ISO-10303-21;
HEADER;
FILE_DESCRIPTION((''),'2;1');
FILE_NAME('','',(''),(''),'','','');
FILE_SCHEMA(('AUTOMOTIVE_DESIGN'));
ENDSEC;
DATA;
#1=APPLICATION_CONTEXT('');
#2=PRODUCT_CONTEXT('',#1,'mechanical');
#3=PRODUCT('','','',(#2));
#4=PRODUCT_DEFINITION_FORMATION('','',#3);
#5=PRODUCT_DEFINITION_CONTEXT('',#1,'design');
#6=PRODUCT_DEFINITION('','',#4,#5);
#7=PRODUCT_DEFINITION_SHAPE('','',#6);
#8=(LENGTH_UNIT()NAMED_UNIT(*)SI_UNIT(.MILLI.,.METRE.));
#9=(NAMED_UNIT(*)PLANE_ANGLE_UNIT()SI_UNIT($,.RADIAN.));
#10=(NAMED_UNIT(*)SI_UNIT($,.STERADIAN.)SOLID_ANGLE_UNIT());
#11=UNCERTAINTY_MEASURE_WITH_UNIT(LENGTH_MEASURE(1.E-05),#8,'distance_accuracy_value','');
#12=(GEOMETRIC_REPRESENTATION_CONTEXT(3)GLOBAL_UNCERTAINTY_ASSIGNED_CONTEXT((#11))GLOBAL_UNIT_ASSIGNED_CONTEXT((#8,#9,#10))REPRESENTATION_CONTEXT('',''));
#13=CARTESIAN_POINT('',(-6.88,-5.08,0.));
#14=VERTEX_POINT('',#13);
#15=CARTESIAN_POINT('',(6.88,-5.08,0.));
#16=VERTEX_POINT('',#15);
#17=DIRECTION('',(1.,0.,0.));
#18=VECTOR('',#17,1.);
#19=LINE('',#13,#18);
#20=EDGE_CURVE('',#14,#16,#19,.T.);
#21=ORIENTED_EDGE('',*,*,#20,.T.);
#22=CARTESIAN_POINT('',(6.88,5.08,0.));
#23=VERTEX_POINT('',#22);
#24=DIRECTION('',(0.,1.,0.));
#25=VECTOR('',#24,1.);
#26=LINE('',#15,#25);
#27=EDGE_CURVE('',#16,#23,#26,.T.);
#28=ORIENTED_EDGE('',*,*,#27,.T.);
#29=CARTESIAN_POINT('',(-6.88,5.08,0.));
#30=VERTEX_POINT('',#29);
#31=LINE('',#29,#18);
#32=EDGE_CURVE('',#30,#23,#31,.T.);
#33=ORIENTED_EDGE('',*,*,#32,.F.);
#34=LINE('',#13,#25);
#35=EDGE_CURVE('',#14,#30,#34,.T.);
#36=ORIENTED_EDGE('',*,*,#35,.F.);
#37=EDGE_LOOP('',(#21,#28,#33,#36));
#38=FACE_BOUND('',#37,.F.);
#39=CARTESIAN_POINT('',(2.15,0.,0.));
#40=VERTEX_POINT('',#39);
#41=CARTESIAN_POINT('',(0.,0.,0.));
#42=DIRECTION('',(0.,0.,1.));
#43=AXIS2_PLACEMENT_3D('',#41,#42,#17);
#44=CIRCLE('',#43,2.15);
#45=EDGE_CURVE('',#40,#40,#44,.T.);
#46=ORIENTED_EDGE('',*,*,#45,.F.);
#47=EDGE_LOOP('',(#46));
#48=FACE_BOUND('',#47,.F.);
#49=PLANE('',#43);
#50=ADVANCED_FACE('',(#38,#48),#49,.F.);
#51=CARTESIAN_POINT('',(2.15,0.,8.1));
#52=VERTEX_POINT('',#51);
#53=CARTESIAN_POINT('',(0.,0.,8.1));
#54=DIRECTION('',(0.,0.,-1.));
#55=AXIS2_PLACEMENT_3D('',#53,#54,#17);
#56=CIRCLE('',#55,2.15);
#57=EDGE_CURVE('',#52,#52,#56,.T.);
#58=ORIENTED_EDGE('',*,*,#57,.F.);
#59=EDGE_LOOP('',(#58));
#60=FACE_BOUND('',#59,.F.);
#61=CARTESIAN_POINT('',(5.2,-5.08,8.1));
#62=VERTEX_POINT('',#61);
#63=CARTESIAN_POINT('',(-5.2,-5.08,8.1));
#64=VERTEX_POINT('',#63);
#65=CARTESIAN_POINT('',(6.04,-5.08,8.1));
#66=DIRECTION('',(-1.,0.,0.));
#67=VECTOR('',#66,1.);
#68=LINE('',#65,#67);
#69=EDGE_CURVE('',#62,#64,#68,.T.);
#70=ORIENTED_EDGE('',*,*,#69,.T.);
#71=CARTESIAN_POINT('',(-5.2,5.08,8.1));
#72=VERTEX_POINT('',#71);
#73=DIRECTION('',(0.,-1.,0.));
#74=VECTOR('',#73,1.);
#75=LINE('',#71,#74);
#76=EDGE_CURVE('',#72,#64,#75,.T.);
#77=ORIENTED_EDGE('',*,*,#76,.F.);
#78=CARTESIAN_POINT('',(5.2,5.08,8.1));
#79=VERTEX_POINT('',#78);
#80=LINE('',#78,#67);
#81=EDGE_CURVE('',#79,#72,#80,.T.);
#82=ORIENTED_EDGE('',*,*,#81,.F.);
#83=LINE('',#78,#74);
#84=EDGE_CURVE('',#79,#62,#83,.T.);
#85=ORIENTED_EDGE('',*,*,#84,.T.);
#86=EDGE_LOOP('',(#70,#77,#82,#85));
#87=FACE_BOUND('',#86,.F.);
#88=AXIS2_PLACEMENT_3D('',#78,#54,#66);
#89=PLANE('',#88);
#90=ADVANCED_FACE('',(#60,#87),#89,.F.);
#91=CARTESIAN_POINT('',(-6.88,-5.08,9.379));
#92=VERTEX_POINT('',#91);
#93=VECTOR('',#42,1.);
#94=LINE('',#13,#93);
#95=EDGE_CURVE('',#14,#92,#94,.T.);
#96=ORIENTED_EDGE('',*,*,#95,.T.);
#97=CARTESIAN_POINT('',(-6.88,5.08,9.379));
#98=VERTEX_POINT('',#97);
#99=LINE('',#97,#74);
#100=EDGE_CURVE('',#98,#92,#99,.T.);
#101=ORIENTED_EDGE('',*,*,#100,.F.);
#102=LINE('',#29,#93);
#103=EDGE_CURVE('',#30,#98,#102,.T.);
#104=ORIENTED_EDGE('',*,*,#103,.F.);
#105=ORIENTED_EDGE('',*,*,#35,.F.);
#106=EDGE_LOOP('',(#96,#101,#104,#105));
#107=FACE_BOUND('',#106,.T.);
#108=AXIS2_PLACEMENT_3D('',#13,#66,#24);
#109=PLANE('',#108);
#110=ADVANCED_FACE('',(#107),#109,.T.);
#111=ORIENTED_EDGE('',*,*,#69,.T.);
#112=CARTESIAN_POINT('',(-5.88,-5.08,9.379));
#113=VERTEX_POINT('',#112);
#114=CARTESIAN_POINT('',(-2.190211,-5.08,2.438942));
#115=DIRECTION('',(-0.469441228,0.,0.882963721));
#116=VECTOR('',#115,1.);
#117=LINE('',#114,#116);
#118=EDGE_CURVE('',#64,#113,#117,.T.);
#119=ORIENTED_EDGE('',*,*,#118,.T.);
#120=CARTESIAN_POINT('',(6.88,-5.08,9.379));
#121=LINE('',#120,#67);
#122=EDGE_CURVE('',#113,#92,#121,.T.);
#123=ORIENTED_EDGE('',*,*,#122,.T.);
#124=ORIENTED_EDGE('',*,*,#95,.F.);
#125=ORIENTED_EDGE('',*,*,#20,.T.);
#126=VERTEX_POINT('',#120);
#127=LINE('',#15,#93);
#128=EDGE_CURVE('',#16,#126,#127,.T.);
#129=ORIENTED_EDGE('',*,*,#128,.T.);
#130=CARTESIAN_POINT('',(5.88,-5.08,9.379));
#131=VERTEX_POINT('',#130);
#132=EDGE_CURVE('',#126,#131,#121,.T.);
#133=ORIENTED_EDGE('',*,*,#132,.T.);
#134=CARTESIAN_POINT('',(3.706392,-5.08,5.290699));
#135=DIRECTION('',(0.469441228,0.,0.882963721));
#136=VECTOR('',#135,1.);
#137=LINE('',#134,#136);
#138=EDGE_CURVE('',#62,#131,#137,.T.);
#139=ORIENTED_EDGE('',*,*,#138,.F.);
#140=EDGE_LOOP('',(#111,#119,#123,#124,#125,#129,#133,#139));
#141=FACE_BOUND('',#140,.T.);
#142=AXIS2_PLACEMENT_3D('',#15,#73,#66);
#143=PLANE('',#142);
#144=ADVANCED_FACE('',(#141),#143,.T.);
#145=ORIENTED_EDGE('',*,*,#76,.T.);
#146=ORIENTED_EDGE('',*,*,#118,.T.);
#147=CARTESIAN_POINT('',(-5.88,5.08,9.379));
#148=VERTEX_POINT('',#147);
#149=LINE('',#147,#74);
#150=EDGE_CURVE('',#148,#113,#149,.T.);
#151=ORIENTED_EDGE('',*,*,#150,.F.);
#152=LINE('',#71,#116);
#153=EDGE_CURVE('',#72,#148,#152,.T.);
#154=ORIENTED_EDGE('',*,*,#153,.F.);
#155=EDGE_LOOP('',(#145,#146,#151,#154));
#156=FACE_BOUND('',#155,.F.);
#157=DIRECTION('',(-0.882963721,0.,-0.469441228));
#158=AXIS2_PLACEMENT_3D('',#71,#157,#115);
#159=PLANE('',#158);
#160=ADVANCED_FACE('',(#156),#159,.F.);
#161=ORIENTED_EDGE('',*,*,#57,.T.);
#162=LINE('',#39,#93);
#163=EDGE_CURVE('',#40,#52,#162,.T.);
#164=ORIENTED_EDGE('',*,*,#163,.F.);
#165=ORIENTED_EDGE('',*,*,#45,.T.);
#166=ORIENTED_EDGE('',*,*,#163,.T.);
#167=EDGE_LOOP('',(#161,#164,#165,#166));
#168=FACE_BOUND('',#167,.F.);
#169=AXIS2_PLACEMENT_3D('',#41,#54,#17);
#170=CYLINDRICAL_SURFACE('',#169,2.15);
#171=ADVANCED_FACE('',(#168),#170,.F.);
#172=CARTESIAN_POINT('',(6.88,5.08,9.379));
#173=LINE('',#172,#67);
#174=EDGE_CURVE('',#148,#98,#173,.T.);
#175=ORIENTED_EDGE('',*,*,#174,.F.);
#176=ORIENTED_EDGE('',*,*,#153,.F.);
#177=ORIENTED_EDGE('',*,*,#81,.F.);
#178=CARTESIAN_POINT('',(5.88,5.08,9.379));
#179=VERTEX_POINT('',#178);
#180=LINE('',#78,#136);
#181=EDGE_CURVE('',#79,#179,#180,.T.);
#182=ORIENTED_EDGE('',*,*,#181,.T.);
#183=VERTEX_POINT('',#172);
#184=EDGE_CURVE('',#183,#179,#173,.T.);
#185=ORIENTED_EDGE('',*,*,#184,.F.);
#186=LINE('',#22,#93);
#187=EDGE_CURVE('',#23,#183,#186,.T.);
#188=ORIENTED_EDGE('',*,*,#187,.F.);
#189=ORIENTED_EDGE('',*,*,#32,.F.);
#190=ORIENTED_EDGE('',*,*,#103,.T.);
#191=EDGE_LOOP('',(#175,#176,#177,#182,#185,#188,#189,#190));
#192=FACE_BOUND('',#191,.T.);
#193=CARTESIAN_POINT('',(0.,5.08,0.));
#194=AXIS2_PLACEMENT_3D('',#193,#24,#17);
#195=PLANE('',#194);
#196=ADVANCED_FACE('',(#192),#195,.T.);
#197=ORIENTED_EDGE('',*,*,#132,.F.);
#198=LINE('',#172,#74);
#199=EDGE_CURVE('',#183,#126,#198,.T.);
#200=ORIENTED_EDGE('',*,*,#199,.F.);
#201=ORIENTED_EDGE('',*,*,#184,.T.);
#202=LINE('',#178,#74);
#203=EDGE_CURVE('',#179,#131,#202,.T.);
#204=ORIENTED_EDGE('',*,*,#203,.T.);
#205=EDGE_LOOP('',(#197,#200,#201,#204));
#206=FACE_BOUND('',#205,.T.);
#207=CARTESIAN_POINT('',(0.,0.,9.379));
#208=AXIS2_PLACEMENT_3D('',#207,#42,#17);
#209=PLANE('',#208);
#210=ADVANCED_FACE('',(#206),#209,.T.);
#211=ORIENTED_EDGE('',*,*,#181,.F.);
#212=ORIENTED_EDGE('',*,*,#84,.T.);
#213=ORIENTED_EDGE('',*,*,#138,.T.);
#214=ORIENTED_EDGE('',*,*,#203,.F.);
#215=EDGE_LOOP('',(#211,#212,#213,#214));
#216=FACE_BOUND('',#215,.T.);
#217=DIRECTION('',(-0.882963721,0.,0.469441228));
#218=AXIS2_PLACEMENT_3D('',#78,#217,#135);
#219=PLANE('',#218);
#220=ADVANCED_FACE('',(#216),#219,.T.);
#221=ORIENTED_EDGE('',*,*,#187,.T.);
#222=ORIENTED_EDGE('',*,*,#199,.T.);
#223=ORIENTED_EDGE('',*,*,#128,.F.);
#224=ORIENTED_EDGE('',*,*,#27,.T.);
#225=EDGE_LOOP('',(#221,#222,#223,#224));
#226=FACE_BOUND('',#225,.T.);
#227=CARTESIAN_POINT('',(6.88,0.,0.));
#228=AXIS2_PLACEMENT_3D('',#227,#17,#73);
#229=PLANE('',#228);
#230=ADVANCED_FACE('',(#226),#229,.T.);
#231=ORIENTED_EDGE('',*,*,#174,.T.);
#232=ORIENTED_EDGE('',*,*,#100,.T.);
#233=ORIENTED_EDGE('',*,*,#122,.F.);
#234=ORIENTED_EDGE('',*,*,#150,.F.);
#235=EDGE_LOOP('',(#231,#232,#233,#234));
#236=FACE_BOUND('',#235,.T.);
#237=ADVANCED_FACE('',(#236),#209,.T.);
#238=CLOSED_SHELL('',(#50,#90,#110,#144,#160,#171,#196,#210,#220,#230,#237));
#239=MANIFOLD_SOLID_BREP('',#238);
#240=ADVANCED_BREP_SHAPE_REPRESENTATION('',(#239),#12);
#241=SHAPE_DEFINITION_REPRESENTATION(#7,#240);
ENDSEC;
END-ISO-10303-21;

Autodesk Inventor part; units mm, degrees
ref_plane "YZ Plane" through (0, 0, 0) normal (1, 0, 0) x (0, 1, 0)
ref_plane "XZ Plane" through (0, 0, 0) normal (0, 1, 0) x (-1, 0, 0)
ref_plane "XY Plane" through (0, 0, 0) normal (0, 0, 1) x (1, 0, 0)
sketch "Sketch1" plane through (0, 0, 0) normal (0, 0, 1) x (1, 0, 0)
  line L0 (6.88, -5.08) -> (-6.88, -5.08)
  line L1 (-6.88, -5.08) -> (-6.88, 5.08)
  line L2 (-6.88, 5.08) -> (6.88, 5.08)
  line L3 (6.88, 5.08) -> (6.88, -5.08)
  line L4 (6.88, -5.08) -> (-6.88, 5.08) construction
  line L5 (-6.88, -5.08) -> (6.88, 5.08) construction
  circle A0 centre (0, 0) radius 3.6
  circle A1 centre (0, 0) radius 2.15
  line L6 (6.88, 0) -> (-6.88, 0)
  line L7 (0, 5.08) -> (0, -5.08)
  dimension "d0" = 13.76
  dimension "d1" = 10.16
  dimension "d2" = 7.2
  dimension "d3" = 4.3
extrude "Extrusion1" add sketch "Sketch1" along normal blind 9.379 contours L0 L7 A0 L6 L3 | L0 L1 L6 A0 L7 | L6 A0 L7 L2 L3 | L7 A1 L6 A0 | A0 L6 A1 L7 | L6 A1 L7 A0 | L1 L2 L7 A0 L6 | A0 L7 A1 L6
sketch "Sketch2" plane through (-6.88, 5.08, 0) normal (0, 1, 0) x (-1, 0, 0)
  line L0 (-12.08, 8.1) -> (-1.68, 8.1)
  line L1 (-6.88, 8.1) -> (-6.88, 9.379) construction
  line L2 (-13.76, 9.379) -> (0, 9.379) construction
  line L3 (-13.76, 9.379) -> (-12.76, 9.379)
  line L4 (0, 9.379) -> (-1, 9.379)
  line L5 (-12.08, 8.1) -> (-12.76, 9.379)
  line L6 (-1.68, 8.1) -> (-1, 9.379)
  line L7 (-13.76, 9.379) -> (-13.76, 11.379)
  line L8 (-13.76, 11.379) -> (0, 11.379)
  line L9 (0, 0) -> (0, 9.379) construction
  line L10 (0, 11.379) -> (0, 9.379)
  dimension "d6" = 10.4
  dimension "d19" = 1.279
  dimension "d20" = 1
  dimension "d21" = 1
  dimension "d22" = 2
extrude "Extrusion2" cut sketch "Sketch2" against normal up to next
properties part number "base_thorlabs"
